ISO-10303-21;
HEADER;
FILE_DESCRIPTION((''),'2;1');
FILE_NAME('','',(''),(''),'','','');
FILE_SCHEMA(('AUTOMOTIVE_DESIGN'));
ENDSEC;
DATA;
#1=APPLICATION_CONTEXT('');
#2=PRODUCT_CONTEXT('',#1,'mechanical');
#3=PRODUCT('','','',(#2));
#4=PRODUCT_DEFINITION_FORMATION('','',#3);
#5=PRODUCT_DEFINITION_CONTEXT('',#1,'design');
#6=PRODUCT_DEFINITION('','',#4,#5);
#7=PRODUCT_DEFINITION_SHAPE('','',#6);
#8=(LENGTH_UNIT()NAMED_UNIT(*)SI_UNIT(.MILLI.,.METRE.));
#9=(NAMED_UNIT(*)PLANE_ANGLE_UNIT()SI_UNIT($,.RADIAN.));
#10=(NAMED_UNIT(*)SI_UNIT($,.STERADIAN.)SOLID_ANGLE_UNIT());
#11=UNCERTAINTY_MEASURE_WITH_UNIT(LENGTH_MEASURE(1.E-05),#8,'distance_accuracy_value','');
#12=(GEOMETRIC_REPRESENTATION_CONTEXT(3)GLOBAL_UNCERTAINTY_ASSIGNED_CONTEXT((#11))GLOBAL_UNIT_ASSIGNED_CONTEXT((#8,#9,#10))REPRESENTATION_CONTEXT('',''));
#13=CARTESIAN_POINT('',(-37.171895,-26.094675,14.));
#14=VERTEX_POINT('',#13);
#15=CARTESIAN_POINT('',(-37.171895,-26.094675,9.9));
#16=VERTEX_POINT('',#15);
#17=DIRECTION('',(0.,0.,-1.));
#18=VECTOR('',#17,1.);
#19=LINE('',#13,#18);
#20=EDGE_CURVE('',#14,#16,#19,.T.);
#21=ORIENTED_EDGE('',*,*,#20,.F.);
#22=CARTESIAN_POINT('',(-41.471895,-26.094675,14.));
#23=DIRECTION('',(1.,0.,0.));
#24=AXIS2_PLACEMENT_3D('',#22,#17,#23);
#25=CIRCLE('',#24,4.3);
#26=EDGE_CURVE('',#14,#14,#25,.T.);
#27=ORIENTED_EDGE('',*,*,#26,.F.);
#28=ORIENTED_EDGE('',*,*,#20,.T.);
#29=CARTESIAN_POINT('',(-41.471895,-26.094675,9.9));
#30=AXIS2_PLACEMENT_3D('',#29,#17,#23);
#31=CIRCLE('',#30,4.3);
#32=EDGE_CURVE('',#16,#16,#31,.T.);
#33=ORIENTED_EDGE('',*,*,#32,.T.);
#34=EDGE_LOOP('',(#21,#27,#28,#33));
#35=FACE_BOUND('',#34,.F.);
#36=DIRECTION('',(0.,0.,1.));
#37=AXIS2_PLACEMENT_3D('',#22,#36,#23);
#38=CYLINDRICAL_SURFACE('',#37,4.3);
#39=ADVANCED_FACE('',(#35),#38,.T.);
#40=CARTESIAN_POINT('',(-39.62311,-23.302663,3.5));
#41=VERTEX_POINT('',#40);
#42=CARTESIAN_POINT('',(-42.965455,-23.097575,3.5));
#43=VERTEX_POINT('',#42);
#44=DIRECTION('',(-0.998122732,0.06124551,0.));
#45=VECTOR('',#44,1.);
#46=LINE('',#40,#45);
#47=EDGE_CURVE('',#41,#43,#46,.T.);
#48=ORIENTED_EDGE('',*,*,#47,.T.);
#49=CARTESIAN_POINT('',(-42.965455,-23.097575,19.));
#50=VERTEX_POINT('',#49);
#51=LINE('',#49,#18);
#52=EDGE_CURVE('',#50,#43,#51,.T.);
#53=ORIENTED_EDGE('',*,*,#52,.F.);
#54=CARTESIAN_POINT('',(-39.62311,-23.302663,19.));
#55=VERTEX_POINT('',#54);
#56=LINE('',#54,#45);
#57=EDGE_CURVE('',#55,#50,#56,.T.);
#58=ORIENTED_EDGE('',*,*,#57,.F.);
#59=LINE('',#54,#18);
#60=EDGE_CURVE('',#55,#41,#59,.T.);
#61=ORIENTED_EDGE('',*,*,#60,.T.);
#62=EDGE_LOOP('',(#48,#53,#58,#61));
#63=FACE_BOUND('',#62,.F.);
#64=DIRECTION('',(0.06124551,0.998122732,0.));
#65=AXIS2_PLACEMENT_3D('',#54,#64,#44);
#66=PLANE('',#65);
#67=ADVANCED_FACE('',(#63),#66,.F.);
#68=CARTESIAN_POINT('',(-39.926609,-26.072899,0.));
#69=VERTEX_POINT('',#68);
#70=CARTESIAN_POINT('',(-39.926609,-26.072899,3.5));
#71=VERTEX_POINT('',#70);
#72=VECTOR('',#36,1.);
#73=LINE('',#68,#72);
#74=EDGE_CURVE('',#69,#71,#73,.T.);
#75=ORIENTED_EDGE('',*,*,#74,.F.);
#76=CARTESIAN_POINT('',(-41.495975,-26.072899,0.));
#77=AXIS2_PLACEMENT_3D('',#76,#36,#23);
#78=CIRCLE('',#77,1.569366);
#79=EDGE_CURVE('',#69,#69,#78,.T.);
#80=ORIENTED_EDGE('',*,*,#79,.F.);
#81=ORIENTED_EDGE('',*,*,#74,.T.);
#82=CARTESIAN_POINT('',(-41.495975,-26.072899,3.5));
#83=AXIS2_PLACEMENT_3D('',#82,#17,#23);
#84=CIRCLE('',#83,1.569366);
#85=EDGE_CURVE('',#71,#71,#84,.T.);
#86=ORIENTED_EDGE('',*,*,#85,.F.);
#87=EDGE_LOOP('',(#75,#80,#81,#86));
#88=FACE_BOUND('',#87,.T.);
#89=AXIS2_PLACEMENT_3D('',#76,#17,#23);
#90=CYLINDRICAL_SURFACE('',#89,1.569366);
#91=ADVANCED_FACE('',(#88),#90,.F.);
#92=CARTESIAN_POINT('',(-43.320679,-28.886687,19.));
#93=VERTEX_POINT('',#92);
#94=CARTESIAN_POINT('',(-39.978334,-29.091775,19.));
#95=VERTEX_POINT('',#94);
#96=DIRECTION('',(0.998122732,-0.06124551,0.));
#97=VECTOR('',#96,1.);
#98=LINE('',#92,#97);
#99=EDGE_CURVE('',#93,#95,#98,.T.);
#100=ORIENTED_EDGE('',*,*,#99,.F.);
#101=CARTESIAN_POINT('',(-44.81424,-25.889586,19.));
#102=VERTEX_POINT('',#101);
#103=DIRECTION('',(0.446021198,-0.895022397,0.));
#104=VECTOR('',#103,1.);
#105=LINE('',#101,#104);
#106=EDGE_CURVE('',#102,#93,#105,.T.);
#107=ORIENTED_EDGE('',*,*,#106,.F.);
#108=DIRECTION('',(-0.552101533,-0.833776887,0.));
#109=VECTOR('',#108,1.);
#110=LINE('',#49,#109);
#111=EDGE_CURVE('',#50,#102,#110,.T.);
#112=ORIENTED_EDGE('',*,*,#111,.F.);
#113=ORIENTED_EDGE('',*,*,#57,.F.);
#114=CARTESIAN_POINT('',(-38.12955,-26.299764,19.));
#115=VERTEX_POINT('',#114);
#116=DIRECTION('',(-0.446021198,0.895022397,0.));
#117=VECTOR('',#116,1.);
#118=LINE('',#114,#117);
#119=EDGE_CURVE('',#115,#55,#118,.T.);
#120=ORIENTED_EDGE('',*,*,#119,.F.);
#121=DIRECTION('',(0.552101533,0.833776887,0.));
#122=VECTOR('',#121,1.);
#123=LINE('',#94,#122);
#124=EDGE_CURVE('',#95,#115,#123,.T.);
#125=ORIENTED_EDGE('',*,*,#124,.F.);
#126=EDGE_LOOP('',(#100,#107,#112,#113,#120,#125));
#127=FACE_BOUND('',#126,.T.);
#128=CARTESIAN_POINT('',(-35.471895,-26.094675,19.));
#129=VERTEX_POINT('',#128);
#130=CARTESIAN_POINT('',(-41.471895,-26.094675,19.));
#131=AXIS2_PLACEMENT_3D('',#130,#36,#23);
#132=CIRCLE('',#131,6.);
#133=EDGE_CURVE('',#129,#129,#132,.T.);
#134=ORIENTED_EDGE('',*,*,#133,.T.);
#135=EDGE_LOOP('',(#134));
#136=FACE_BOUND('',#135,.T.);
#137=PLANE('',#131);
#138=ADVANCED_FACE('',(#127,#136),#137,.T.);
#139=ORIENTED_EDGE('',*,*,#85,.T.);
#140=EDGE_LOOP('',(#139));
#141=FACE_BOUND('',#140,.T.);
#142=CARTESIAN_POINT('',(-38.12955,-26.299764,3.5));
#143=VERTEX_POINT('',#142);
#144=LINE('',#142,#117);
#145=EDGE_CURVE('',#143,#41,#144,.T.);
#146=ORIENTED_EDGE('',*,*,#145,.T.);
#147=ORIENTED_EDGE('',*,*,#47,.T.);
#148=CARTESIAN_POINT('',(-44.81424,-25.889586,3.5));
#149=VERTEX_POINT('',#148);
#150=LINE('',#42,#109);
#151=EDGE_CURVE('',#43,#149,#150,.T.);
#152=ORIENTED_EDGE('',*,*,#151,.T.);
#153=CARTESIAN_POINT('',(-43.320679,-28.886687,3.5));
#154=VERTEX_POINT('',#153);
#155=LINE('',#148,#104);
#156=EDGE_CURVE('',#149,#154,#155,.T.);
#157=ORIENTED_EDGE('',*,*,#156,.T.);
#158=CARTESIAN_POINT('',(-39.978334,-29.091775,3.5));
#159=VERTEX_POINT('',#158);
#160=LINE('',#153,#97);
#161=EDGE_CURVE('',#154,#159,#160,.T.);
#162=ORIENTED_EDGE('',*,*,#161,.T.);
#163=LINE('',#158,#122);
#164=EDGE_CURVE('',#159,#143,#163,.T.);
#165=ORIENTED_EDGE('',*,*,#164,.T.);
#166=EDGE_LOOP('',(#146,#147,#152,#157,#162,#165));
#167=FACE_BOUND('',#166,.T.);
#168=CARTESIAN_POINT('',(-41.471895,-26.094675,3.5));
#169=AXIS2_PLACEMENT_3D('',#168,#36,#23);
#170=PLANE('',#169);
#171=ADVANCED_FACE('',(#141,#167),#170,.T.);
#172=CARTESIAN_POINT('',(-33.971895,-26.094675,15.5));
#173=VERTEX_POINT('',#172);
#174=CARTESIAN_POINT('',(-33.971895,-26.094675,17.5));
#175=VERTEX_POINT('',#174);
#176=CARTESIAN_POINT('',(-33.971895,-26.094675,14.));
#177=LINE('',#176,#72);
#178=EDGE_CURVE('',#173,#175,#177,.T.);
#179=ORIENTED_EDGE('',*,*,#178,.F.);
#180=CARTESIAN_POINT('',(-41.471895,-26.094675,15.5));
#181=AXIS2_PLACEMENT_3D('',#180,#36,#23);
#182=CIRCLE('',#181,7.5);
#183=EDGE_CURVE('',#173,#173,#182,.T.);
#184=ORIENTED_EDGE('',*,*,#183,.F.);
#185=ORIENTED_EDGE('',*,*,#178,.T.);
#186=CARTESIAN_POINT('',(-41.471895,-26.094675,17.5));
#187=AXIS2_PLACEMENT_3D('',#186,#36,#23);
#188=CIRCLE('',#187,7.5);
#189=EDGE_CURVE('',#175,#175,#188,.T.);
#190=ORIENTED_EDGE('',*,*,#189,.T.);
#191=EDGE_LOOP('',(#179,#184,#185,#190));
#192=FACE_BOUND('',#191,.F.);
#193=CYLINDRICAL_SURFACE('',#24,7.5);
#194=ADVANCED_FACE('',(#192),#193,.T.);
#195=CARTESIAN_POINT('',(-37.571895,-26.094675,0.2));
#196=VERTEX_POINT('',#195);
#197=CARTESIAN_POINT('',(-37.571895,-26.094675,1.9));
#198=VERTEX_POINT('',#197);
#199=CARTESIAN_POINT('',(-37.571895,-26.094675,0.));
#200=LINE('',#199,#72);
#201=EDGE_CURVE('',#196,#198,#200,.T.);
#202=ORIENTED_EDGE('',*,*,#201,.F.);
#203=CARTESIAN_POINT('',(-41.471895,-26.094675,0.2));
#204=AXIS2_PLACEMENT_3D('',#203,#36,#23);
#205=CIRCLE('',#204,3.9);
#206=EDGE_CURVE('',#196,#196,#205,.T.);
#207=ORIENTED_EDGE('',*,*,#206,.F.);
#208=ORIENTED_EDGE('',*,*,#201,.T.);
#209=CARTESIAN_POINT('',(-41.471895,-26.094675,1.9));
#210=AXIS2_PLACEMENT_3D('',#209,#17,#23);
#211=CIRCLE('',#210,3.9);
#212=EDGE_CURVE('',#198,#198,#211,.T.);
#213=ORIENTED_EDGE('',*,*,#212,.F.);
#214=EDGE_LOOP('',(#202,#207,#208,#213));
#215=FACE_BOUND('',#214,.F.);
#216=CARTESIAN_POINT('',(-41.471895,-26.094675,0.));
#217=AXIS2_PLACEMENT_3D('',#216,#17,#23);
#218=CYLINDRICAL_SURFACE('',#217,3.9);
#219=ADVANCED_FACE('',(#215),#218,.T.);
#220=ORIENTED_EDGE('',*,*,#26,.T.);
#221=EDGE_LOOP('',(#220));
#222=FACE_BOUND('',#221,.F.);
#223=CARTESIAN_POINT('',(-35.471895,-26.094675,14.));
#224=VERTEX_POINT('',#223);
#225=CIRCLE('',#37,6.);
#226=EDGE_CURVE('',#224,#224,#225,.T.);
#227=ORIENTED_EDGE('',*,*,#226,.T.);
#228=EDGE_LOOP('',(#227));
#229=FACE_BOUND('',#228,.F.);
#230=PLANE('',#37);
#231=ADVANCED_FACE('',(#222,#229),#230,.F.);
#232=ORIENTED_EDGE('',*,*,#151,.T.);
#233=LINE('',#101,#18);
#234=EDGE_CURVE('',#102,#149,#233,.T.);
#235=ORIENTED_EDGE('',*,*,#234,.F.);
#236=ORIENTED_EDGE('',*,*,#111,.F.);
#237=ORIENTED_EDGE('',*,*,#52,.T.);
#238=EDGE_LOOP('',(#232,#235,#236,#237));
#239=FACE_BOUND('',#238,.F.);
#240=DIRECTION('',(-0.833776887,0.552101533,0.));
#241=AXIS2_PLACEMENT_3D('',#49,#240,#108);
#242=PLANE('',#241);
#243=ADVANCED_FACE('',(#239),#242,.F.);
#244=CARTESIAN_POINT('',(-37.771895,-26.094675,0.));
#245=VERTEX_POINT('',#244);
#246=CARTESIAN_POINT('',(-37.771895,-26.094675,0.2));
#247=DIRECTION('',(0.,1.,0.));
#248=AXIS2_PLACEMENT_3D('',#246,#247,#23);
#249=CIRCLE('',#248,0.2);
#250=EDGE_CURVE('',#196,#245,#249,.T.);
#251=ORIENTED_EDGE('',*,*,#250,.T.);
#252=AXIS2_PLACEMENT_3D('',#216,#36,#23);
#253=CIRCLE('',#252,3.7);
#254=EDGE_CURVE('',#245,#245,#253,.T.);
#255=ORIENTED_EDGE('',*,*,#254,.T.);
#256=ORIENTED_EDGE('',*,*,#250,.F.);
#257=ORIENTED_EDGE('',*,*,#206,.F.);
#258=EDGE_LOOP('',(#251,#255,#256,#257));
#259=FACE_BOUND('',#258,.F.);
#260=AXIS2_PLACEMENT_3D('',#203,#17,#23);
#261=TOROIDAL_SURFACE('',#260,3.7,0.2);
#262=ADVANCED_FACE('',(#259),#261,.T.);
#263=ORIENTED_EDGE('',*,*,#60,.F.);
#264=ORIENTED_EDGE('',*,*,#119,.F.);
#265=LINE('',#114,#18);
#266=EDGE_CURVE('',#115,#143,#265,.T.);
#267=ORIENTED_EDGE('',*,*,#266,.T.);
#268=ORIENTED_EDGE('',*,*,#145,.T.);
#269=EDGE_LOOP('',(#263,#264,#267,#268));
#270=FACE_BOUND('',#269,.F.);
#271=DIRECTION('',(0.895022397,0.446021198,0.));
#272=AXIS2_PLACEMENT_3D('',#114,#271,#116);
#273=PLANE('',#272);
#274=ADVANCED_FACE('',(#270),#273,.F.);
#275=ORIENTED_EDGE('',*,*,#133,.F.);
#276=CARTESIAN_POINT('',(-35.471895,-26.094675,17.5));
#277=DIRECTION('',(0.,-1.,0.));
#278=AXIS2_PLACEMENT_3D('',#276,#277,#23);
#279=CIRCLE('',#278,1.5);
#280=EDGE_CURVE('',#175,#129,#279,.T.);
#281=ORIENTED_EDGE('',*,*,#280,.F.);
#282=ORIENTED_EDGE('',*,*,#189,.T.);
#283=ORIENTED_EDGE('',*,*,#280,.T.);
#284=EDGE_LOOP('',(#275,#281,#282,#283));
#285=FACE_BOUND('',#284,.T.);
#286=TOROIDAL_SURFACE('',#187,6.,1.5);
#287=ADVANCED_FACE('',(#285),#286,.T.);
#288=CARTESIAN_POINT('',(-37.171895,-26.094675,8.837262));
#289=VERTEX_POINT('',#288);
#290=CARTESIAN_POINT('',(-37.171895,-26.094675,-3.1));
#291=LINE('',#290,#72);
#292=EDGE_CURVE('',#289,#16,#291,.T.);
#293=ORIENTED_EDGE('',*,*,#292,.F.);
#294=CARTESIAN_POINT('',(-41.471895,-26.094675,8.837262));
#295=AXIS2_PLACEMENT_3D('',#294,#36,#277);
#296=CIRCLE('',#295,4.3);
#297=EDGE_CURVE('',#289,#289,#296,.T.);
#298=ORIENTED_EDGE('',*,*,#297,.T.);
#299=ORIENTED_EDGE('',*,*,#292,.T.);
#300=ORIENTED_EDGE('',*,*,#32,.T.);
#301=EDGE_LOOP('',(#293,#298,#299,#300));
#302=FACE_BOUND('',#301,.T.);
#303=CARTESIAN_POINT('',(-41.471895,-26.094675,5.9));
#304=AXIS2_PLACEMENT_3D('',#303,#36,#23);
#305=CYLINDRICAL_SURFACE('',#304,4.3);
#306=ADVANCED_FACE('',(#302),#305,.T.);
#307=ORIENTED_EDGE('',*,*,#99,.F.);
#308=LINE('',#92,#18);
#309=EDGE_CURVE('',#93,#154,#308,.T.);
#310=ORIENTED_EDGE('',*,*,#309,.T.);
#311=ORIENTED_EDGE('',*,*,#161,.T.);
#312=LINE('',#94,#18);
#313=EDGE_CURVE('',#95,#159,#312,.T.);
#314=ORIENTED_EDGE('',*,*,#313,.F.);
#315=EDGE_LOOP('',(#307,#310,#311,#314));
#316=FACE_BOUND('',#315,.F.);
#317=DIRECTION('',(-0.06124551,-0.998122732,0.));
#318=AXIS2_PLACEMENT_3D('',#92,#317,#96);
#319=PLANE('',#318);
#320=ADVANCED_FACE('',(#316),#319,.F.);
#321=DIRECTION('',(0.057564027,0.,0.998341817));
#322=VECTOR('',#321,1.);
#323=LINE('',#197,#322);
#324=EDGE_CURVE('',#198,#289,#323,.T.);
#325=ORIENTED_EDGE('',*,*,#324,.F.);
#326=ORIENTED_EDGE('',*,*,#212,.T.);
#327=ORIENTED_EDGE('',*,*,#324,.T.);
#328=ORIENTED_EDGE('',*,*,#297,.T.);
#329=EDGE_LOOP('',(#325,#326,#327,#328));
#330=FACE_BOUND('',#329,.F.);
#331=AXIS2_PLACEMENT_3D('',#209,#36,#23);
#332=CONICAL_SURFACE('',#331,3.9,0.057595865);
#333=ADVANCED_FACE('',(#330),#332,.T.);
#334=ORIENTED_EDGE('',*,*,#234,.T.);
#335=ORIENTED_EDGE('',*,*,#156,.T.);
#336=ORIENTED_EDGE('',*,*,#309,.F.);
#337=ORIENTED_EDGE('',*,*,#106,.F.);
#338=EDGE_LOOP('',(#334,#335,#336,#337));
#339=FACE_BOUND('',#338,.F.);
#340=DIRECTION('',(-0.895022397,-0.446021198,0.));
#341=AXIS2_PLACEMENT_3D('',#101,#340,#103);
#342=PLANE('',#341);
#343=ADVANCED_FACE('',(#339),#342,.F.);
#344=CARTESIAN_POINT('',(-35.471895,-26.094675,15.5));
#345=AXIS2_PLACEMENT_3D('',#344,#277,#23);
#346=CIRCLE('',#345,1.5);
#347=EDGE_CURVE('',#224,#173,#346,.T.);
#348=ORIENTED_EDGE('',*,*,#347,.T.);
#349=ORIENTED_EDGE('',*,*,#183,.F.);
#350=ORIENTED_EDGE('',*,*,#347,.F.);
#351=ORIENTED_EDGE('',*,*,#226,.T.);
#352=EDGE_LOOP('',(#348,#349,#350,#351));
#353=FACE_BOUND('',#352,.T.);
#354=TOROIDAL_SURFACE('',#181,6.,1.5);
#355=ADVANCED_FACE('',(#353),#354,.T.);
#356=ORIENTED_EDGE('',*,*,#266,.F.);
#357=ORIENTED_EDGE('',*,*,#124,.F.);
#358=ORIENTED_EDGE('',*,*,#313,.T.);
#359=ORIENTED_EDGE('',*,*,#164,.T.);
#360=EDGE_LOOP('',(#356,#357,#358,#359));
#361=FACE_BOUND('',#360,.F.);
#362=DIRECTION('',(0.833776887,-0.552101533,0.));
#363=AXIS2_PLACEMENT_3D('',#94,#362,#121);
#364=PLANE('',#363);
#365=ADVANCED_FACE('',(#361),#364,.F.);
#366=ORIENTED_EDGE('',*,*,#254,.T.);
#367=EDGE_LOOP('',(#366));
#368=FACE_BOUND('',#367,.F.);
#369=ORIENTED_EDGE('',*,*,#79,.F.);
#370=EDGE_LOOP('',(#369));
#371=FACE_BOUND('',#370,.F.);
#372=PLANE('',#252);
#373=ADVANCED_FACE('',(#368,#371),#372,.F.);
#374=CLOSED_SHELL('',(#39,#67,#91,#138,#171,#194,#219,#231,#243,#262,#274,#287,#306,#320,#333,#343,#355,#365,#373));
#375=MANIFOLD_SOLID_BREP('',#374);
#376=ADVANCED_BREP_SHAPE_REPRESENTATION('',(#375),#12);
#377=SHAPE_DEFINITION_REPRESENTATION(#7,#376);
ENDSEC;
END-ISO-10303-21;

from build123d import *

# Parameters (mm, degrees)
F0_R         = 3.9
F2_DEPTH     = 14
F3_R         = 7.5
F4_DEPTH     = 5
F6_R         = 4.3
F7_DEPTH     = 4.1
F1_R         = 1.5693660879
F8_DEPTH     = 23.4
F9_DEPTH     = 15.5
F10_R        = 0.2
F11_S5_R     = 4.3
F11_T6_DEPTH = 9
F12_R        = 1.5
F13_R        = 1.5


# Not quite as in the source:
# - a fillet or chamfer that OpenCascade refuses, or shapes differently, is made with other operations: its cross-section is extruded or revolved along the edge and cut away or added


with BuildPart() as f2:
    # F0 (on Top) → F2 (new body)
    with BuildSketch(Plane.XY):
        with Locations((-41.4718948305, -26.0946750641)):
            Circle(F0_R)
    extrude(amount=F2_DEPTH)

    # F3 (on face) → F4 (join)
    with BuildSketch(Plane.XY.offset(14)):
        with Locations((-41.4718948305, -26.0946750641)):
            Circle(F3_R)
    extrude(amount=F4_DEPTH)

    # F6 (on face) → F7 (join)
    with BuildSketch(Plane(origin=(0, 0, 14), x_dir=(1, 0, 0), z_dir=(0, 0, -1))):
        with Locations((-41.4718948305, 26.0946750641)):
            Circle(F6_R)
    extrude(amount=F7_DEPTH)

    # F1 (on Top) → F8 (cut)
    with BuildSketch(Plane.XY):
        with Locations((-41.495975107, -26.0728988796)):
            Circle(F1_R)
    extrude(amount=F8_DEPTH, mode=Mode.SUBTRACT)

    # F5 (on face) → F9 (cut)
    with BuildSketch(Plane.XY.offset(19)):
        Polygon((-39.9783341683, -29.0917753096), (-38.1295495491, -26.2997637113), (-39.6231102113, -23.3026634658), (-42.9654554927, -23.0975748186), (-44.8142401119, -25.8895864169), (-43.3206794497, -28.8866866624), align=None)
    extrude(amount=-F9_DEPTH, mode=Mode.SUBTRACT)

    # F10
    f10_edges = [f2.edges().sort_by_distance(p)[0] for p in [
        (-45.371895, -26.094675, 0),
    ]]
    fillet(f10_edges, radius=F10_R)

    # F11: chamfer of 8 x 0.4612770977 on 1 edges, made by hand


with BuildPart() as f11_tool2:
    # F11_s3 → F11_t4 (revolve)
    with BuildSketch(Plane.XZ.offset(26.0946750641)):
        Polygon((-37.5718948305, 1.9), (-37.1106177328, 9.9), (-37.5718948305, 9.9), align=None)
    revolve(axis=Axis((-41.4718948305, -26.0946750641, 9.9), (0, 0, -1)))

    # F11_s5 → F11_t6 (intersect, symmetric)
    with BuildSketch(Plane.XY.offset(5.9)):
        with Locations((-41.4718948305, -26.0946750641)):
            Circle(F11_S5_R)
    extrude(amount=F11_T6_DEPTH, both=True, mode=Mode.INTERSECT)


with BuildPart() as f2_1:
    add(f2.part)

    # F11_t1: union F11_tool2
    add(f11_tool2.part)

    # F12
    f12_edges = [f2_1.edges().sort_by_distance(p)[0] for p in [
        (-48.971895, -26.094675, 14),
    ]]
    fillet(f12_edges, radius=F12_R)

    # F13
    f13_edges = [f2_1.edges().sort_by_distance(p)[0] for p in [
        (-48.971895, -26.094675, 19),
    ]]
    fillet(f13_edges, radius=F13_R)


solid = f2_1.part
